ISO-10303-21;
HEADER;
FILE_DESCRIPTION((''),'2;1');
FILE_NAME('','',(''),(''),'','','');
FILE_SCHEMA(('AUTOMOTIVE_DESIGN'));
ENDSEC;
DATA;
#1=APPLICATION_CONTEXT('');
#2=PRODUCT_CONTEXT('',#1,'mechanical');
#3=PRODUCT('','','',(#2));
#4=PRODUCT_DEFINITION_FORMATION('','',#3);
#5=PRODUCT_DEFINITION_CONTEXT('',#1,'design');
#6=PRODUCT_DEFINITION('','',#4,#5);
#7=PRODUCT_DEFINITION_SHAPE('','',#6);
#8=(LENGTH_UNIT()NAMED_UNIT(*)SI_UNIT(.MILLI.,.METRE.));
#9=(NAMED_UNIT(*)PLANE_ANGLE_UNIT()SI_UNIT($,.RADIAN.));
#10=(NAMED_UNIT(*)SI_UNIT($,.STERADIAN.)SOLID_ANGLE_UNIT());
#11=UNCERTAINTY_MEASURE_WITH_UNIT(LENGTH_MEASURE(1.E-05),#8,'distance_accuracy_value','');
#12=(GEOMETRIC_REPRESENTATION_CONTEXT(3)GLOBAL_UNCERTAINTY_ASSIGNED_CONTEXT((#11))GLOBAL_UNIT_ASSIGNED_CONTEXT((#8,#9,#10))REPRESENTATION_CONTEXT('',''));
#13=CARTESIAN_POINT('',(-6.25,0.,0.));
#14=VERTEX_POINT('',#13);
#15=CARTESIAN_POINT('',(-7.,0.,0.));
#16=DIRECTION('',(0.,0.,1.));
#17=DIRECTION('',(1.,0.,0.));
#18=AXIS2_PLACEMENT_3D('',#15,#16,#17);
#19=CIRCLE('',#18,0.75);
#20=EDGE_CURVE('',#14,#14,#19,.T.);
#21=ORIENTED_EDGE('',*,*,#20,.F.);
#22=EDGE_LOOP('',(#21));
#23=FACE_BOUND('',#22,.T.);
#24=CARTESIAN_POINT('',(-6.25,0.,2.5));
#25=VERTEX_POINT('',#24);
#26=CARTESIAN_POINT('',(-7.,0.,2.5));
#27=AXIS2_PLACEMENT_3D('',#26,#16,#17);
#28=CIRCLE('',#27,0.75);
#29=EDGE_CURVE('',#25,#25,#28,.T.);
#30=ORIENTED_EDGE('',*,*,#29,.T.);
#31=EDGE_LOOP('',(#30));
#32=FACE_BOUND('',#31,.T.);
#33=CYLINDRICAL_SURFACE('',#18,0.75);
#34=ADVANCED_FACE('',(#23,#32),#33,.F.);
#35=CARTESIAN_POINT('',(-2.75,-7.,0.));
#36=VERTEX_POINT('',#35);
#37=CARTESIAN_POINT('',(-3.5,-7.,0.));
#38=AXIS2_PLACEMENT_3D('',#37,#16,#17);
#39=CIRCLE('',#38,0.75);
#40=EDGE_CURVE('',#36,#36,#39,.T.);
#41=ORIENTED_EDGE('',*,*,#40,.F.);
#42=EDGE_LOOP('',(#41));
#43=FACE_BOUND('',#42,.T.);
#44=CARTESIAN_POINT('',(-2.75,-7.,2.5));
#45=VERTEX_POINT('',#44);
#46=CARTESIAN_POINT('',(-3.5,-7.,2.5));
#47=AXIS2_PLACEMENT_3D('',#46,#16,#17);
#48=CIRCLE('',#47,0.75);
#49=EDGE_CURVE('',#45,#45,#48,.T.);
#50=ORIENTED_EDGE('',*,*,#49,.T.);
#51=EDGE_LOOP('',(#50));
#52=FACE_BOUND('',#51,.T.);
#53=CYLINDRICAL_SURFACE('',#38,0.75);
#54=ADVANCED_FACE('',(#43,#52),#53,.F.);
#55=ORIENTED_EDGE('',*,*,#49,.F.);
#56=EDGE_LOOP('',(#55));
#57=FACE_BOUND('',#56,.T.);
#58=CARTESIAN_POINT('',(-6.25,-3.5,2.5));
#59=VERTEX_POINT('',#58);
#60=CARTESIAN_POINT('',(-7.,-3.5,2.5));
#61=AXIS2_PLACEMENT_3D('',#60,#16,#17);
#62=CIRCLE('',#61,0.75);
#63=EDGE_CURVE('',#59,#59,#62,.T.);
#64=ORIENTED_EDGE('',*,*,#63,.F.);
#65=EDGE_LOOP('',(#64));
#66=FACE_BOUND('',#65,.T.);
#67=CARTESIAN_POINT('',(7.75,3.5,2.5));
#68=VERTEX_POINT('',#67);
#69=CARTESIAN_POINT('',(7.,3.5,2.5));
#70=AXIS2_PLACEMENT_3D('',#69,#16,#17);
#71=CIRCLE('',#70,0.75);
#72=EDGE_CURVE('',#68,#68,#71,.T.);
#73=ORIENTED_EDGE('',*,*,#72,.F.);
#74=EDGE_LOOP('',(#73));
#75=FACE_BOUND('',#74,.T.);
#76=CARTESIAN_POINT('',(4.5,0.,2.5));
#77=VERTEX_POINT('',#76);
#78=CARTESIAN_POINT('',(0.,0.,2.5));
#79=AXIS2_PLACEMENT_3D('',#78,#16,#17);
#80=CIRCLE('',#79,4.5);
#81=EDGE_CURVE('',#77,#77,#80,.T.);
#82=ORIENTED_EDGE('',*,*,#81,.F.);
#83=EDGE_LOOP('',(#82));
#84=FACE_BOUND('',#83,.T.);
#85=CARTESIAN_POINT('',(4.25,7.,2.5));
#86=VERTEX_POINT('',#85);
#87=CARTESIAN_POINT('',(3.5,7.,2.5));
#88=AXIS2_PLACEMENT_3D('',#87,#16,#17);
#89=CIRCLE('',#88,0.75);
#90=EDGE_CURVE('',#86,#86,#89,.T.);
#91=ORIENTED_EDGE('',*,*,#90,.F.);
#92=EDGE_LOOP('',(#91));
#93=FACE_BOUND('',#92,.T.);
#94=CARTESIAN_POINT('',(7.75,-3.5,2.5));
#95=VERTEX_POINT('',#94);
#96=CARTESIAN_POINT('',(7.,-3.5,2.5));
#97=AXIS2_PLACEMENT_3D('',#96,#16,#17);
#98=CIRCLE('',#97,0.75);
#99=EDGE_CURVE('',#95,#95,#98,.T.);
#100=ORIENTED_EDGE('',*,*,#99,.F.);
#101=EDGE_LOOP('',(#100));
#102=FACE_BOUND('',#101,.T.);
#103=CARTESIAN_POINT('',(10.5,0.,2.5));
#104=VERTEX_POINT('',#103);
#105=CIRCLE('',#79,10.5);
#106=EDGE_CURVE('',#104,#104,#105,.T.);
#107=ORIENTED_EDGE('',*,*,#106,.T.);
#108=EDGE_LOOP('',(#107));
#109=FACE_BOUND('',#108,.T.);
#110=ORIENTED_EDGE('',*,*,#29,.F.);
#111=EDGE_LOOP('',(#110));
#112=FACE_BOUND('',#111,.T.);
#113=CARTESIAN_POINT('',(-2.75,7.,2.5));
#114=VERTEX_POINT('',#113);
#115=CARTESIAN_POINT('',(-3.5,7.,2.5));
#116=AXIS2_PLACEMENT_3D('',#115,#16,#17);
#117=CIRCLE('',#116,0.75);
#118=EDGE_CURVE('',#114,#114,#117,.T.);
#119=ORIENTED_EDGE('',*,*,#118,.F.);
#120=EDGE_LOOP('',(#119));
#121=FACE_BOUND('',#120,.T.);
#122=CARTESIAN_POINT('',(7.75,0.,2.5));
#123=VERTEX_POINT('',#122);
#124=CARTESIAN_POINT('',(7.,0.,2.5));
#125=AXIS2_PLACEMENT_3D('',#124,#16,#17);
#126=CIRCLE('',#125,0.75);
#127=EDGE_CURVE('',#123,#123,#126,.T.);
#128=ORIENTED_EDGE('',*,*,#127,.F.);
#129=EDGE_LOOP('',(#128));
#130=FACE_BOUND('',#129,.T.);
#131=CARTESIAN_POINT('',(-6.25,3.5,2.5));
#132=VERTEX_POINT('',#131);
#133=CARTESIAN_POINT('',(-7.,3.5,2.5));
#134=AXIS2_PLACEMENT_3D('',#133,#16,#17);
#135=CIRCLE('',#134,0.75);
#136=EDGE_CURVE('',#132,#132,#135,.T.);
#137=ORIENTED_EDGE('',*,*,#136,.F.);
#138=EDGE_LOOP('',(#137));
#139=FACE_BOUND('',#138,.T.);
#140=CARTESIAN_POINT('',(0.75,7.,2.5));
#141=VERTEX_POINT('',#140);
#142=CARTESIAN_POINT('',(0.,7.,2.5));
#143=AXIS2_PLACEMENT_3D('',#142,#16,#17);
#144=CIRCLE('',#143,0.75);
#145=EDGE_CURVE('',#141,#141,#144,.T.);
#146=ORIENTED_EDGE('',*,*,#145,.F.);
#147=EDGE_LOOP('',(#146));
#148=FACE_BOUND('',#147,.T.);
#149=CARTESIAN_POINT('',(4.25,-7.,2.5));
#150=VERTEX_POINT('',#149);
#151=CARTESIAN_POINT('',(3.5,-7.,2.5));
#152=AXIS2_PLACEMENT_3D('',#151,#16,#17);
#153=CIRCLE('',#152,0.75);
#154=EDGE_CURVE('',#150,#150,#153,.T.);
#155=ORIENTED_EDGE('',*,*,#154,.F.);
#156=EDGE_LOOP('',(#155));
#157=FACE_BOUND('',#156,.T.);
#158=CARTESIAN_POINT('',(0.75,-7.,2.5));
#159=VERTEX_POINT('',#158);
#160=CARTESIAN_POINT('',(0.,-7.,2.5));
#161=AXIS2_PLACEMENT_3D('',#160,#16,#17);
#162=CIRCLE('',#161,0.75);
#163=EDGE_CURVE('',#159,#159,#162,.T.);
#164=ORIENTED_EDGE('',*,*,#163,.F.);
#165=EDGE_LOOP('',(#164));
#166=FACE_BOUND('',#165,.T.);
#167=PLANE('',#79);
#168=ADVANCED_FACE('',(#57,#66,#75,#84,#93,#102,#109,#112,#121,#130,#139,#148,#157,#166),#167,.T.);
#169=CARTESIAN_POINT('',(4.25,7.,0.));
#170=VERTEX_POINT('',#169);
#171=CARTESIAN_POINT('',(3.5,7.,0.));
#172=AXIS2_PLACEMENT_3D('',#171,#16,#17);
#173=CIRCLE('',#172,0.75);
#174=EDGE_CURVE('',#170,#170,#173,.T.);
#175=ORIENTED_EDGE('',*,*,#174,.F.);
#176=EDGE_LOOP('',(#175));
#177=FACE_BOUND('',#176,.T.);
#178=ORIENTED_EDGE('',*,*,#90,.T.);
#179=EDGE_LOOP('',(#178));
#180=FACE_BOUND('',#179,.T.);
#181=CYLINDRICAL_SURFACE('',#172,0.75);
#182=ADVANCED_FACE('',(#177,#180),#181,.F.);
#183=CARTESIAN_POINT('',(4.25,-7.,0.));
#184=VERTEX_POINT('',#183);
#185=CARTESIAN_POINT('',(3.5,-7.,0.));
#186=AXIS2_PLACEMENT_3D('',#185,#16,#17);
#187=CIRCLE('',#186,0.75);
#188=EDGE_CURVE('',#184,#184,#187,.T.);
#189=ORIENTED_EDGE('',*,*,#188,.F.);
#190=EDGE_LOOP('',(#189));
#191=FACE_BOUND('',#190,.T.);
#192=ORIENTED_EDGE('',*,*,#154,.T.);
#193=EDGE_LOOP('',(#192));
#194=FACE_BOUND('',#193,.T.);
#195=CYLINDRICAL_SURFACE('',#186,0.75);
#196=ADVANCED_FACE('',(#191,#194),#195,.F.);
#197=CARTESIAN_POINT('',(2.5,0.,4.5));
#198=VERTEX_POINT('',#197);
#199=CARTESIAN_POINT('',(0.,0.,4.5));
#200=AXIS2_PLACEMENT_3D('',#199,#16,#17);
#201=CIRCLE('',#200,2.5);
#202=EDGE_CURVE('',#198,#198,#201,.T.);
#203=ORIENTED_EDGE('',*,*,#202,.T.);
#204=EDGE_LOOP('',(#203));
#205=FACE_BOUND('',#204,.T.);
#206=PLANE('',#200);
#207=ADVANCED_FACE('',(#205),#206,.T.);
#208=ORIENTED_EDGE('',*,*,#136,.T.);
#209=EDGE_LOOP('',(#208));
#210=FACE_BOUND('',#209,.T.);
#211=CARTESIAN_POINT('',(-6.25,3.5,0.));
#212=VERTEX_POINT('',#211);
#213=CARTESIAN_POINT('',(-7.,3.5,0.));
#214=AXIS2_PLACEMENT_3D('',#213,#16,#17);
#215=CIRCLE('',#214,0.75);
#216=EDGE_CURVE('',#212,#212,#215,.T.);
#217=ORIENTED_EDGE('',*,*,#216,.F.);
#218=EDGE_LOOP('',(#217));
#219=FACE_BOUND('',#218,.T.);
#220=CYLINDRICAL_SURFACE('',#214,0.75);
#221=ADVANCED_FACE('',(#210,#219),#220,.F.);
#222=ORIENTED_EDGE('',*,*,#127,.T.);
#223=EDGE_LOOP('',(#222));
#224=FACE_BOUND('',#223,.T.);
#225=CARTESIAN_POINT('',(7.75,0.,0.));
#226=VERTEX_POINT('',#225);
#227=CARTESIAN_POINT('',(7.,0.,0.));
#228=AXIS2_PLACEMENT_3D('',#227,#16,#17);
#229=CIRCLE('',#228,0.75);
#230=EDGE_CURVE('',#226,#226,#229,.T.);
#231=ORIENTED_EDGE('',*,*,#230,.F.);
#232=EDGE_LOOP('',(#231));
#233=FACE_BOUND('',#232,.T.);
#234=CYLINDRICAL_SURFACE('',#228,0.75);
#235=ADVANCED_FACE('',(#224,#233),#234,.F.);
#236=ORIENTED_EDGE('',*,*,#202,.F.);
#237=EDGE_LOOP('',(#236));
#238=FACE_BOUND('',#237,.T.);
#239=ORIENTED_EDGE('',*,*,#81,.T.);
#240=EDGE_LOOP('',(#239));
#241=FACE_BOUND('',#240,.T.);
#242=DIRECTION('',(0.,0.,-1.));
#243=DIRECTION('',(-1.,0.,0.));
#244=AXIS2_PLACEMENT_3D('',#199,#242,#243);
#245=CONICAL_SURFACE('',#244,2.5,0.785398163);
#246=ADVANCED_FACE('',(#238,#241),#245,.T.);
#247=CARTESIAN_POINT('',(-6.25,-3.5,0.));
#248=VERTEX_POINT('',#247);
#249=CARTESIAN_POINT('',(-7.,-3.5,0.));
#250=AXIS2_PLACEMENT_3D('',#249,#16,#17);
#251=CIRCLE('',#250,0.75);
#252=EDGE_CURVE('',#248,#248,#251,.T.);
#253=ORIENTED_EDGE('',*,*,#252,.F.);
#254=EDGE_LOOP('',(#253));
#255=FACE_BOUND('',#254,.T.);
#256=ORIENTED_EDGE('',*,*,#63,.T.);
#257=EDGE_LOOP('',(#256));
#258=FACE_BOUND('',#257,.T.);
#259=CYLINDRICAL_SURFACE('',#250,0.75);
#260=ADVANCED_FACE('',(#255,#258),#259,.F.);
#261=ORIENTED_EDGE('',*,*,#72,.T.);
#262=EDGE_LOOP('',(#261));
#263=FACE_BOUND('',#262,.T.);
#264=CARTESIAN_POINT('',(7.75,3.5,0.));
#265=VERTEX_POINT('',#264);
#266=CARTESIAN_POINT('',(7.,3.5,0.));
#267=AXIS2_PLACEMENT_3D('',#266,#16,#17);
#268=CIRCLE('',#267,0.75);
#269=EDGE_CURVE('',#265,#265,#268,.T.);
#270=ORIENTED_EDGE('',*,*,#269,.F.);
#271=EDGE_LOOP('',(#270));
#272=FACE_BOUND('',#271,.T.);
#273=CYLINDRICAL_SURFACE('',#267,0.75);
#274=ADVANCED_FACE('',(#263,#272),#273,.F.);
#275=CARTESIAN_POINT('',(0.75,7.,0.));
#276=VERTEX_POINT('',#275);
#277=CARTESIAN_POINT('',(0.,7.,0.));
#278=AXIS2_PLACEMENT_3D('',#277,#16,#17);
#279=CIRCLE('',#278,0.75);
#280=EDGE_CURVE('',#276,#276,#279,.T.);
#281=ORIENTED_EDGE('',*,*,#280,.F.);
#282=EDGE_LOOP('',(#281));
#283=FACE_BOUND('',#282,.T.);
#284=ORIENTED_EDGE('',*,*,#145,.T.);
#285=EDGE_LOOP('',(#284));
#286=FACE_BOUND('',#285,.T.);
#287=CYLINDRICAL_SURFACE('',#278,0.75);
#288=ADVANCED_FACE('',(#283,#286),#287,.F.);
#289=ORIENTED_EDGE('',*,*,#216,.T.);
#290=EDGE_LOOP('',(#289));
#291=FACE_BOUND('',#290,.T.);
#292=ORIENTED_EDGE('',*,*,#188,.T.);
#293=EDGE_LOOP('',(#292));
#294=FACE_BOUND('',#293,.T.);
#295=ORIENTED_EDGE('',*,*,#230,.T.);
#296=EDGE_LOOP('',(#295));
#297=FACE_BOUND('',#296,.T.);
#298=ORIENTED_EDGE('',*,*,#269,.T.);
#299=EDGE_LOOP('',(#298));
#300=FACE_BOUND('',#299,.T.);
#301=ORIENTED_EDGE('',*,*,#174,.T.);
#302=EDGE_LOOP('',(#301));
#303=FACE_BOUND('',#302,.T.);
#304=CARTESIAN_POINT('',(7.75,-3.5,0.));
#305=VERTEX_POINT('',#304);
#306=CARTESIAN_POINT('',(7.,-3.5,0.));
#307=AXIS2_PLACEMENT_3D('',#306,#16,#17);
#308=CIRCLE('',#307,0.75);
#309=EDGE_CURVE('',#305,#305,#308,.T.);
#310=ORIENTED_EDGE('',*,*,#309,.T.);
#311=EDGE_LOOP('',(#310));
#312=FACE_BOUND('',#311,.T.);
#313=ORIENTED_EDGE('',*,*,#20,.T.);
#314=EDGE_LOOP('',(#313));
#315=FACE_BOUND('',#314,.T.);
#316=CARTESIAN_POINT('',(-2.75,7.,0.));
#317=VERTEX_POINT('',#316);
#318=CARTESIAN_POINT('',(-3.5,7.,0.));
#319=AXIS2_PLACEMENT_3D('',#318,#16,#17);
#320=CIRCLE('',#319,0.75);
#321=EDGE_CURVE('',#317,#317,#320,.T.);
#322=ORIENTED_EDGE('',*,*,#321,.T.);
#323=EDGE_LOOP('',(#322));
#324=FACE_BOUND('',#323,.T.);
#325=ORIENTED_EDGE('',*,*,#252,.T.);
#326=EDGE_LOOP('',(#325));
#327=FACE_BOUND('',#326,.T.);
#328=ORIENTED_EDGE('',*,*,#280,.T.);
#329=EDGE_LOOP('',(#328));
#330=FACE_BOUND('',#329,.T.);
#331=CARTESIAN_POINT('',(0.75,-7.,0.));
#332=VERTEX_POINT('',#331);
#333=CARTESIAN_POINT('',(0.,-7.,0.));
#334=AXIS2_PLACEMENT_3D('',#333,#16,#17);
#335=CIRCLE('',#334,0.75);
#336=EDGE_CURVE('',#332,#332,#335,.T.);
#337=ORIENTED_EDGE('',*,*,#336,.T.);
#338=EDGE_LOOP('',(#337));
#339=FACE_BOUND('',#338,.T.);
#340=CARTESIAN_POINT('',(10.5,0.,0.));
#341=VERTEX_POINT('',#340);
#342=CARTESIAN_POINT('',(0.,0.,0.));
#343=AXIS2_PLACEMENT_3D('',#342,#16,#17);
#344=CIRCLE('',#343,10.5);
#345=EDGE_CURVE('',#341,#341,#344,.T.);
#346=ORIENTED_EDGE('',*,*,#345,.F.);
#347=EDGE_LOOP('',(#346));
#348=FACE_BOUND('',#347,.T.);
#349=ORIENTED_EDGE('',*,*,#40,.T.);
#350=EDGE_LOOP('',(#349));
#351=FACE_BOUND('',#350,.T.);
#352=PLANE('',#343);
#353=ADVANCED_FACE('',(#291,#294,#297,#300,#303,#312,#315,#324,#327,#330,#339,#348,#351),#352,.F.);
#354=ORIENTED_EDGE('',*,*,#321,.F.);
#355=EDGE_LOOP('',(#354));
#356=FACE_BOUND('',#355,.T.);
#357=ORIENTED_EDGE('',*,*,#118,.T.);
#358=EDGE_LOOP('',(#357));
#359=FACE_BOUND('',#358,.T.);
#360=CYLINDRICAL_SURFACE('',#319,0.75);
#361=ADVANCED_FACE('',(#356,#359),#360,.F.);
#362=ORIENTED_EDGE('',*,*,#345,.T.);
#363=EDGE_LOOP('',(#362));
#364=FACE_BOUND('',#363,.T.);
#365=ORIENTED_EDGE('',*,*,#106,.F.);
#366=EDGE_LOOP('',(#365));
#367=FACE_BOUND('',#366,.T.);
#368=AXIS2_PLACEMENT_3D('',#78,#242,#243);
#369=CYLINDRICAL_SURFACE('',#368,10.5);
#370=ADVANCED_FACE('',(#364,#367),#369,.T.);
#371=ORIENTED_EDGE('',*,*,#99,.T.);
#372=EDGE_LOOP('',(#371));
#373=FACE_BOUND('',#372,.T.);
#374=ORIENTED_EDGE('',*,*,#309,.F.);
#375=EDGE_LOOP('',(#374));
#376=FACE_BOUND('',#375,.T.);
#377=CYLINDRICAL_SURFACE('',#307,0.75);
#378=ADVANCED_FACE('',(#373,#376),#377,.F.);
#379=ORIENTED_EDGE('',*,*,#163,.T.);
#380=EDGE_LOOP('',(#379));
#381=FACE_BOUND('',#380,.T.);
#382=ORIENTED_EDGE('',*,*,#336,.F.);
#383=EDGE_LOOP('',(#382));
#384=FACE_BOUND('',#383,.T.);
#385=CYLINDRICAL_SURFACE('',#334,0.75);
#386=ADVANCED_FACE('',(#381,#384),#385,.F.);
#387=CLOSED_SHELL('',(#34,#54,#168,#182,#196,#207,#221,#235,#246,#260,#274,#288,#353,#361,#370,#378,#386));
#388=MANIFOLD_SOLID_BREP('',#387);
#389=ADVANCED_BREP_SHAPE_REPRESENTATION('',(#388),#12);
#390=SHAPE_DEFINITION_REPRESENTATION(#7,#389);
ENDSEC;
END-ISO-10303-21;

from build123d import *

# Parameters (mm, degrees)
SKETCH1_R           = 10.5
BOSS_EXTRUDE1_DEPTH = 2.5
SKETCH3_R           = 4.5
BOSS_EXTRUDE2_DEPTH = 2
CHAMFER1_SIZE       = 2
SKETCH4_R           = 0.75
CUT_EXTRUDE1_DEPTH  = 16.058220346


with BuildPart() as part:
    # Sketch1 → Boss-Extrude1 (new body)
    with BuildSketch(Plane.XY):
        Circle(SKETCH1_R)
    extrude(amount=BOSS_EXTRUDE1_DEPTH)

    # Sketch3 → Boss-Extrude2 (add)
    with BuildSketch(Plane.XY.offset(2.5)):
        Circle(SKETCH3_R)
    extrude(amount=BOSS_EXTRUDE2_DEPTH)

    # Chamfer1
    chamfer1_edges = [part.edges().sort_by_distance(p)[0] for p in [
        (-4.5, 0, 4.5),
    ]]
    chamfer(chamfer1_edges, length=CHAMFER1_SIZE - 0.0001)  # a hair under: the kernel refuses the full size

    # Sketch4 → Cut-Extrude1 (cut, through all)
    with BuildSketch(Plane.XY.offset(2.5)):
        with Locations((0, 7)):
            Circle(SKETCH4_R)
        with Locations((7, 0)):
            Circle(SKETCH4_R)
        with Locations((0, -7)):
            Circle(SKETCH4_R)
        with Locations((-7, 0)):
            Circle(SKETCH4_R)
        with Locations((3.5, 7)):
            Circle(SKETCH4_R)
        with Locations((-3.5, 7)):
            Circle(SKETCH4_R)
        with Locations((7, -3.5)):
            Circle(SKETCH4_R)
        with Locations((7, 3.5)):
            Circle(SKETCH4_R)
        with Locations((3.5, -7)):
            Circle(SKETCH4_R)
        with Locations((-3.5, -7)):
            Circle(SKETCH4_R)
        with Locations((-7, -3.5)):
            Circle(SKETCH4_R)
        with Locations((-7, 3.5)):
            Circle(SKETCH4_R)
    extrude(amount=-CUT_EXTRUDE1_DEPTH, mode=Mode.SUBTRACT)


solid = part.part
